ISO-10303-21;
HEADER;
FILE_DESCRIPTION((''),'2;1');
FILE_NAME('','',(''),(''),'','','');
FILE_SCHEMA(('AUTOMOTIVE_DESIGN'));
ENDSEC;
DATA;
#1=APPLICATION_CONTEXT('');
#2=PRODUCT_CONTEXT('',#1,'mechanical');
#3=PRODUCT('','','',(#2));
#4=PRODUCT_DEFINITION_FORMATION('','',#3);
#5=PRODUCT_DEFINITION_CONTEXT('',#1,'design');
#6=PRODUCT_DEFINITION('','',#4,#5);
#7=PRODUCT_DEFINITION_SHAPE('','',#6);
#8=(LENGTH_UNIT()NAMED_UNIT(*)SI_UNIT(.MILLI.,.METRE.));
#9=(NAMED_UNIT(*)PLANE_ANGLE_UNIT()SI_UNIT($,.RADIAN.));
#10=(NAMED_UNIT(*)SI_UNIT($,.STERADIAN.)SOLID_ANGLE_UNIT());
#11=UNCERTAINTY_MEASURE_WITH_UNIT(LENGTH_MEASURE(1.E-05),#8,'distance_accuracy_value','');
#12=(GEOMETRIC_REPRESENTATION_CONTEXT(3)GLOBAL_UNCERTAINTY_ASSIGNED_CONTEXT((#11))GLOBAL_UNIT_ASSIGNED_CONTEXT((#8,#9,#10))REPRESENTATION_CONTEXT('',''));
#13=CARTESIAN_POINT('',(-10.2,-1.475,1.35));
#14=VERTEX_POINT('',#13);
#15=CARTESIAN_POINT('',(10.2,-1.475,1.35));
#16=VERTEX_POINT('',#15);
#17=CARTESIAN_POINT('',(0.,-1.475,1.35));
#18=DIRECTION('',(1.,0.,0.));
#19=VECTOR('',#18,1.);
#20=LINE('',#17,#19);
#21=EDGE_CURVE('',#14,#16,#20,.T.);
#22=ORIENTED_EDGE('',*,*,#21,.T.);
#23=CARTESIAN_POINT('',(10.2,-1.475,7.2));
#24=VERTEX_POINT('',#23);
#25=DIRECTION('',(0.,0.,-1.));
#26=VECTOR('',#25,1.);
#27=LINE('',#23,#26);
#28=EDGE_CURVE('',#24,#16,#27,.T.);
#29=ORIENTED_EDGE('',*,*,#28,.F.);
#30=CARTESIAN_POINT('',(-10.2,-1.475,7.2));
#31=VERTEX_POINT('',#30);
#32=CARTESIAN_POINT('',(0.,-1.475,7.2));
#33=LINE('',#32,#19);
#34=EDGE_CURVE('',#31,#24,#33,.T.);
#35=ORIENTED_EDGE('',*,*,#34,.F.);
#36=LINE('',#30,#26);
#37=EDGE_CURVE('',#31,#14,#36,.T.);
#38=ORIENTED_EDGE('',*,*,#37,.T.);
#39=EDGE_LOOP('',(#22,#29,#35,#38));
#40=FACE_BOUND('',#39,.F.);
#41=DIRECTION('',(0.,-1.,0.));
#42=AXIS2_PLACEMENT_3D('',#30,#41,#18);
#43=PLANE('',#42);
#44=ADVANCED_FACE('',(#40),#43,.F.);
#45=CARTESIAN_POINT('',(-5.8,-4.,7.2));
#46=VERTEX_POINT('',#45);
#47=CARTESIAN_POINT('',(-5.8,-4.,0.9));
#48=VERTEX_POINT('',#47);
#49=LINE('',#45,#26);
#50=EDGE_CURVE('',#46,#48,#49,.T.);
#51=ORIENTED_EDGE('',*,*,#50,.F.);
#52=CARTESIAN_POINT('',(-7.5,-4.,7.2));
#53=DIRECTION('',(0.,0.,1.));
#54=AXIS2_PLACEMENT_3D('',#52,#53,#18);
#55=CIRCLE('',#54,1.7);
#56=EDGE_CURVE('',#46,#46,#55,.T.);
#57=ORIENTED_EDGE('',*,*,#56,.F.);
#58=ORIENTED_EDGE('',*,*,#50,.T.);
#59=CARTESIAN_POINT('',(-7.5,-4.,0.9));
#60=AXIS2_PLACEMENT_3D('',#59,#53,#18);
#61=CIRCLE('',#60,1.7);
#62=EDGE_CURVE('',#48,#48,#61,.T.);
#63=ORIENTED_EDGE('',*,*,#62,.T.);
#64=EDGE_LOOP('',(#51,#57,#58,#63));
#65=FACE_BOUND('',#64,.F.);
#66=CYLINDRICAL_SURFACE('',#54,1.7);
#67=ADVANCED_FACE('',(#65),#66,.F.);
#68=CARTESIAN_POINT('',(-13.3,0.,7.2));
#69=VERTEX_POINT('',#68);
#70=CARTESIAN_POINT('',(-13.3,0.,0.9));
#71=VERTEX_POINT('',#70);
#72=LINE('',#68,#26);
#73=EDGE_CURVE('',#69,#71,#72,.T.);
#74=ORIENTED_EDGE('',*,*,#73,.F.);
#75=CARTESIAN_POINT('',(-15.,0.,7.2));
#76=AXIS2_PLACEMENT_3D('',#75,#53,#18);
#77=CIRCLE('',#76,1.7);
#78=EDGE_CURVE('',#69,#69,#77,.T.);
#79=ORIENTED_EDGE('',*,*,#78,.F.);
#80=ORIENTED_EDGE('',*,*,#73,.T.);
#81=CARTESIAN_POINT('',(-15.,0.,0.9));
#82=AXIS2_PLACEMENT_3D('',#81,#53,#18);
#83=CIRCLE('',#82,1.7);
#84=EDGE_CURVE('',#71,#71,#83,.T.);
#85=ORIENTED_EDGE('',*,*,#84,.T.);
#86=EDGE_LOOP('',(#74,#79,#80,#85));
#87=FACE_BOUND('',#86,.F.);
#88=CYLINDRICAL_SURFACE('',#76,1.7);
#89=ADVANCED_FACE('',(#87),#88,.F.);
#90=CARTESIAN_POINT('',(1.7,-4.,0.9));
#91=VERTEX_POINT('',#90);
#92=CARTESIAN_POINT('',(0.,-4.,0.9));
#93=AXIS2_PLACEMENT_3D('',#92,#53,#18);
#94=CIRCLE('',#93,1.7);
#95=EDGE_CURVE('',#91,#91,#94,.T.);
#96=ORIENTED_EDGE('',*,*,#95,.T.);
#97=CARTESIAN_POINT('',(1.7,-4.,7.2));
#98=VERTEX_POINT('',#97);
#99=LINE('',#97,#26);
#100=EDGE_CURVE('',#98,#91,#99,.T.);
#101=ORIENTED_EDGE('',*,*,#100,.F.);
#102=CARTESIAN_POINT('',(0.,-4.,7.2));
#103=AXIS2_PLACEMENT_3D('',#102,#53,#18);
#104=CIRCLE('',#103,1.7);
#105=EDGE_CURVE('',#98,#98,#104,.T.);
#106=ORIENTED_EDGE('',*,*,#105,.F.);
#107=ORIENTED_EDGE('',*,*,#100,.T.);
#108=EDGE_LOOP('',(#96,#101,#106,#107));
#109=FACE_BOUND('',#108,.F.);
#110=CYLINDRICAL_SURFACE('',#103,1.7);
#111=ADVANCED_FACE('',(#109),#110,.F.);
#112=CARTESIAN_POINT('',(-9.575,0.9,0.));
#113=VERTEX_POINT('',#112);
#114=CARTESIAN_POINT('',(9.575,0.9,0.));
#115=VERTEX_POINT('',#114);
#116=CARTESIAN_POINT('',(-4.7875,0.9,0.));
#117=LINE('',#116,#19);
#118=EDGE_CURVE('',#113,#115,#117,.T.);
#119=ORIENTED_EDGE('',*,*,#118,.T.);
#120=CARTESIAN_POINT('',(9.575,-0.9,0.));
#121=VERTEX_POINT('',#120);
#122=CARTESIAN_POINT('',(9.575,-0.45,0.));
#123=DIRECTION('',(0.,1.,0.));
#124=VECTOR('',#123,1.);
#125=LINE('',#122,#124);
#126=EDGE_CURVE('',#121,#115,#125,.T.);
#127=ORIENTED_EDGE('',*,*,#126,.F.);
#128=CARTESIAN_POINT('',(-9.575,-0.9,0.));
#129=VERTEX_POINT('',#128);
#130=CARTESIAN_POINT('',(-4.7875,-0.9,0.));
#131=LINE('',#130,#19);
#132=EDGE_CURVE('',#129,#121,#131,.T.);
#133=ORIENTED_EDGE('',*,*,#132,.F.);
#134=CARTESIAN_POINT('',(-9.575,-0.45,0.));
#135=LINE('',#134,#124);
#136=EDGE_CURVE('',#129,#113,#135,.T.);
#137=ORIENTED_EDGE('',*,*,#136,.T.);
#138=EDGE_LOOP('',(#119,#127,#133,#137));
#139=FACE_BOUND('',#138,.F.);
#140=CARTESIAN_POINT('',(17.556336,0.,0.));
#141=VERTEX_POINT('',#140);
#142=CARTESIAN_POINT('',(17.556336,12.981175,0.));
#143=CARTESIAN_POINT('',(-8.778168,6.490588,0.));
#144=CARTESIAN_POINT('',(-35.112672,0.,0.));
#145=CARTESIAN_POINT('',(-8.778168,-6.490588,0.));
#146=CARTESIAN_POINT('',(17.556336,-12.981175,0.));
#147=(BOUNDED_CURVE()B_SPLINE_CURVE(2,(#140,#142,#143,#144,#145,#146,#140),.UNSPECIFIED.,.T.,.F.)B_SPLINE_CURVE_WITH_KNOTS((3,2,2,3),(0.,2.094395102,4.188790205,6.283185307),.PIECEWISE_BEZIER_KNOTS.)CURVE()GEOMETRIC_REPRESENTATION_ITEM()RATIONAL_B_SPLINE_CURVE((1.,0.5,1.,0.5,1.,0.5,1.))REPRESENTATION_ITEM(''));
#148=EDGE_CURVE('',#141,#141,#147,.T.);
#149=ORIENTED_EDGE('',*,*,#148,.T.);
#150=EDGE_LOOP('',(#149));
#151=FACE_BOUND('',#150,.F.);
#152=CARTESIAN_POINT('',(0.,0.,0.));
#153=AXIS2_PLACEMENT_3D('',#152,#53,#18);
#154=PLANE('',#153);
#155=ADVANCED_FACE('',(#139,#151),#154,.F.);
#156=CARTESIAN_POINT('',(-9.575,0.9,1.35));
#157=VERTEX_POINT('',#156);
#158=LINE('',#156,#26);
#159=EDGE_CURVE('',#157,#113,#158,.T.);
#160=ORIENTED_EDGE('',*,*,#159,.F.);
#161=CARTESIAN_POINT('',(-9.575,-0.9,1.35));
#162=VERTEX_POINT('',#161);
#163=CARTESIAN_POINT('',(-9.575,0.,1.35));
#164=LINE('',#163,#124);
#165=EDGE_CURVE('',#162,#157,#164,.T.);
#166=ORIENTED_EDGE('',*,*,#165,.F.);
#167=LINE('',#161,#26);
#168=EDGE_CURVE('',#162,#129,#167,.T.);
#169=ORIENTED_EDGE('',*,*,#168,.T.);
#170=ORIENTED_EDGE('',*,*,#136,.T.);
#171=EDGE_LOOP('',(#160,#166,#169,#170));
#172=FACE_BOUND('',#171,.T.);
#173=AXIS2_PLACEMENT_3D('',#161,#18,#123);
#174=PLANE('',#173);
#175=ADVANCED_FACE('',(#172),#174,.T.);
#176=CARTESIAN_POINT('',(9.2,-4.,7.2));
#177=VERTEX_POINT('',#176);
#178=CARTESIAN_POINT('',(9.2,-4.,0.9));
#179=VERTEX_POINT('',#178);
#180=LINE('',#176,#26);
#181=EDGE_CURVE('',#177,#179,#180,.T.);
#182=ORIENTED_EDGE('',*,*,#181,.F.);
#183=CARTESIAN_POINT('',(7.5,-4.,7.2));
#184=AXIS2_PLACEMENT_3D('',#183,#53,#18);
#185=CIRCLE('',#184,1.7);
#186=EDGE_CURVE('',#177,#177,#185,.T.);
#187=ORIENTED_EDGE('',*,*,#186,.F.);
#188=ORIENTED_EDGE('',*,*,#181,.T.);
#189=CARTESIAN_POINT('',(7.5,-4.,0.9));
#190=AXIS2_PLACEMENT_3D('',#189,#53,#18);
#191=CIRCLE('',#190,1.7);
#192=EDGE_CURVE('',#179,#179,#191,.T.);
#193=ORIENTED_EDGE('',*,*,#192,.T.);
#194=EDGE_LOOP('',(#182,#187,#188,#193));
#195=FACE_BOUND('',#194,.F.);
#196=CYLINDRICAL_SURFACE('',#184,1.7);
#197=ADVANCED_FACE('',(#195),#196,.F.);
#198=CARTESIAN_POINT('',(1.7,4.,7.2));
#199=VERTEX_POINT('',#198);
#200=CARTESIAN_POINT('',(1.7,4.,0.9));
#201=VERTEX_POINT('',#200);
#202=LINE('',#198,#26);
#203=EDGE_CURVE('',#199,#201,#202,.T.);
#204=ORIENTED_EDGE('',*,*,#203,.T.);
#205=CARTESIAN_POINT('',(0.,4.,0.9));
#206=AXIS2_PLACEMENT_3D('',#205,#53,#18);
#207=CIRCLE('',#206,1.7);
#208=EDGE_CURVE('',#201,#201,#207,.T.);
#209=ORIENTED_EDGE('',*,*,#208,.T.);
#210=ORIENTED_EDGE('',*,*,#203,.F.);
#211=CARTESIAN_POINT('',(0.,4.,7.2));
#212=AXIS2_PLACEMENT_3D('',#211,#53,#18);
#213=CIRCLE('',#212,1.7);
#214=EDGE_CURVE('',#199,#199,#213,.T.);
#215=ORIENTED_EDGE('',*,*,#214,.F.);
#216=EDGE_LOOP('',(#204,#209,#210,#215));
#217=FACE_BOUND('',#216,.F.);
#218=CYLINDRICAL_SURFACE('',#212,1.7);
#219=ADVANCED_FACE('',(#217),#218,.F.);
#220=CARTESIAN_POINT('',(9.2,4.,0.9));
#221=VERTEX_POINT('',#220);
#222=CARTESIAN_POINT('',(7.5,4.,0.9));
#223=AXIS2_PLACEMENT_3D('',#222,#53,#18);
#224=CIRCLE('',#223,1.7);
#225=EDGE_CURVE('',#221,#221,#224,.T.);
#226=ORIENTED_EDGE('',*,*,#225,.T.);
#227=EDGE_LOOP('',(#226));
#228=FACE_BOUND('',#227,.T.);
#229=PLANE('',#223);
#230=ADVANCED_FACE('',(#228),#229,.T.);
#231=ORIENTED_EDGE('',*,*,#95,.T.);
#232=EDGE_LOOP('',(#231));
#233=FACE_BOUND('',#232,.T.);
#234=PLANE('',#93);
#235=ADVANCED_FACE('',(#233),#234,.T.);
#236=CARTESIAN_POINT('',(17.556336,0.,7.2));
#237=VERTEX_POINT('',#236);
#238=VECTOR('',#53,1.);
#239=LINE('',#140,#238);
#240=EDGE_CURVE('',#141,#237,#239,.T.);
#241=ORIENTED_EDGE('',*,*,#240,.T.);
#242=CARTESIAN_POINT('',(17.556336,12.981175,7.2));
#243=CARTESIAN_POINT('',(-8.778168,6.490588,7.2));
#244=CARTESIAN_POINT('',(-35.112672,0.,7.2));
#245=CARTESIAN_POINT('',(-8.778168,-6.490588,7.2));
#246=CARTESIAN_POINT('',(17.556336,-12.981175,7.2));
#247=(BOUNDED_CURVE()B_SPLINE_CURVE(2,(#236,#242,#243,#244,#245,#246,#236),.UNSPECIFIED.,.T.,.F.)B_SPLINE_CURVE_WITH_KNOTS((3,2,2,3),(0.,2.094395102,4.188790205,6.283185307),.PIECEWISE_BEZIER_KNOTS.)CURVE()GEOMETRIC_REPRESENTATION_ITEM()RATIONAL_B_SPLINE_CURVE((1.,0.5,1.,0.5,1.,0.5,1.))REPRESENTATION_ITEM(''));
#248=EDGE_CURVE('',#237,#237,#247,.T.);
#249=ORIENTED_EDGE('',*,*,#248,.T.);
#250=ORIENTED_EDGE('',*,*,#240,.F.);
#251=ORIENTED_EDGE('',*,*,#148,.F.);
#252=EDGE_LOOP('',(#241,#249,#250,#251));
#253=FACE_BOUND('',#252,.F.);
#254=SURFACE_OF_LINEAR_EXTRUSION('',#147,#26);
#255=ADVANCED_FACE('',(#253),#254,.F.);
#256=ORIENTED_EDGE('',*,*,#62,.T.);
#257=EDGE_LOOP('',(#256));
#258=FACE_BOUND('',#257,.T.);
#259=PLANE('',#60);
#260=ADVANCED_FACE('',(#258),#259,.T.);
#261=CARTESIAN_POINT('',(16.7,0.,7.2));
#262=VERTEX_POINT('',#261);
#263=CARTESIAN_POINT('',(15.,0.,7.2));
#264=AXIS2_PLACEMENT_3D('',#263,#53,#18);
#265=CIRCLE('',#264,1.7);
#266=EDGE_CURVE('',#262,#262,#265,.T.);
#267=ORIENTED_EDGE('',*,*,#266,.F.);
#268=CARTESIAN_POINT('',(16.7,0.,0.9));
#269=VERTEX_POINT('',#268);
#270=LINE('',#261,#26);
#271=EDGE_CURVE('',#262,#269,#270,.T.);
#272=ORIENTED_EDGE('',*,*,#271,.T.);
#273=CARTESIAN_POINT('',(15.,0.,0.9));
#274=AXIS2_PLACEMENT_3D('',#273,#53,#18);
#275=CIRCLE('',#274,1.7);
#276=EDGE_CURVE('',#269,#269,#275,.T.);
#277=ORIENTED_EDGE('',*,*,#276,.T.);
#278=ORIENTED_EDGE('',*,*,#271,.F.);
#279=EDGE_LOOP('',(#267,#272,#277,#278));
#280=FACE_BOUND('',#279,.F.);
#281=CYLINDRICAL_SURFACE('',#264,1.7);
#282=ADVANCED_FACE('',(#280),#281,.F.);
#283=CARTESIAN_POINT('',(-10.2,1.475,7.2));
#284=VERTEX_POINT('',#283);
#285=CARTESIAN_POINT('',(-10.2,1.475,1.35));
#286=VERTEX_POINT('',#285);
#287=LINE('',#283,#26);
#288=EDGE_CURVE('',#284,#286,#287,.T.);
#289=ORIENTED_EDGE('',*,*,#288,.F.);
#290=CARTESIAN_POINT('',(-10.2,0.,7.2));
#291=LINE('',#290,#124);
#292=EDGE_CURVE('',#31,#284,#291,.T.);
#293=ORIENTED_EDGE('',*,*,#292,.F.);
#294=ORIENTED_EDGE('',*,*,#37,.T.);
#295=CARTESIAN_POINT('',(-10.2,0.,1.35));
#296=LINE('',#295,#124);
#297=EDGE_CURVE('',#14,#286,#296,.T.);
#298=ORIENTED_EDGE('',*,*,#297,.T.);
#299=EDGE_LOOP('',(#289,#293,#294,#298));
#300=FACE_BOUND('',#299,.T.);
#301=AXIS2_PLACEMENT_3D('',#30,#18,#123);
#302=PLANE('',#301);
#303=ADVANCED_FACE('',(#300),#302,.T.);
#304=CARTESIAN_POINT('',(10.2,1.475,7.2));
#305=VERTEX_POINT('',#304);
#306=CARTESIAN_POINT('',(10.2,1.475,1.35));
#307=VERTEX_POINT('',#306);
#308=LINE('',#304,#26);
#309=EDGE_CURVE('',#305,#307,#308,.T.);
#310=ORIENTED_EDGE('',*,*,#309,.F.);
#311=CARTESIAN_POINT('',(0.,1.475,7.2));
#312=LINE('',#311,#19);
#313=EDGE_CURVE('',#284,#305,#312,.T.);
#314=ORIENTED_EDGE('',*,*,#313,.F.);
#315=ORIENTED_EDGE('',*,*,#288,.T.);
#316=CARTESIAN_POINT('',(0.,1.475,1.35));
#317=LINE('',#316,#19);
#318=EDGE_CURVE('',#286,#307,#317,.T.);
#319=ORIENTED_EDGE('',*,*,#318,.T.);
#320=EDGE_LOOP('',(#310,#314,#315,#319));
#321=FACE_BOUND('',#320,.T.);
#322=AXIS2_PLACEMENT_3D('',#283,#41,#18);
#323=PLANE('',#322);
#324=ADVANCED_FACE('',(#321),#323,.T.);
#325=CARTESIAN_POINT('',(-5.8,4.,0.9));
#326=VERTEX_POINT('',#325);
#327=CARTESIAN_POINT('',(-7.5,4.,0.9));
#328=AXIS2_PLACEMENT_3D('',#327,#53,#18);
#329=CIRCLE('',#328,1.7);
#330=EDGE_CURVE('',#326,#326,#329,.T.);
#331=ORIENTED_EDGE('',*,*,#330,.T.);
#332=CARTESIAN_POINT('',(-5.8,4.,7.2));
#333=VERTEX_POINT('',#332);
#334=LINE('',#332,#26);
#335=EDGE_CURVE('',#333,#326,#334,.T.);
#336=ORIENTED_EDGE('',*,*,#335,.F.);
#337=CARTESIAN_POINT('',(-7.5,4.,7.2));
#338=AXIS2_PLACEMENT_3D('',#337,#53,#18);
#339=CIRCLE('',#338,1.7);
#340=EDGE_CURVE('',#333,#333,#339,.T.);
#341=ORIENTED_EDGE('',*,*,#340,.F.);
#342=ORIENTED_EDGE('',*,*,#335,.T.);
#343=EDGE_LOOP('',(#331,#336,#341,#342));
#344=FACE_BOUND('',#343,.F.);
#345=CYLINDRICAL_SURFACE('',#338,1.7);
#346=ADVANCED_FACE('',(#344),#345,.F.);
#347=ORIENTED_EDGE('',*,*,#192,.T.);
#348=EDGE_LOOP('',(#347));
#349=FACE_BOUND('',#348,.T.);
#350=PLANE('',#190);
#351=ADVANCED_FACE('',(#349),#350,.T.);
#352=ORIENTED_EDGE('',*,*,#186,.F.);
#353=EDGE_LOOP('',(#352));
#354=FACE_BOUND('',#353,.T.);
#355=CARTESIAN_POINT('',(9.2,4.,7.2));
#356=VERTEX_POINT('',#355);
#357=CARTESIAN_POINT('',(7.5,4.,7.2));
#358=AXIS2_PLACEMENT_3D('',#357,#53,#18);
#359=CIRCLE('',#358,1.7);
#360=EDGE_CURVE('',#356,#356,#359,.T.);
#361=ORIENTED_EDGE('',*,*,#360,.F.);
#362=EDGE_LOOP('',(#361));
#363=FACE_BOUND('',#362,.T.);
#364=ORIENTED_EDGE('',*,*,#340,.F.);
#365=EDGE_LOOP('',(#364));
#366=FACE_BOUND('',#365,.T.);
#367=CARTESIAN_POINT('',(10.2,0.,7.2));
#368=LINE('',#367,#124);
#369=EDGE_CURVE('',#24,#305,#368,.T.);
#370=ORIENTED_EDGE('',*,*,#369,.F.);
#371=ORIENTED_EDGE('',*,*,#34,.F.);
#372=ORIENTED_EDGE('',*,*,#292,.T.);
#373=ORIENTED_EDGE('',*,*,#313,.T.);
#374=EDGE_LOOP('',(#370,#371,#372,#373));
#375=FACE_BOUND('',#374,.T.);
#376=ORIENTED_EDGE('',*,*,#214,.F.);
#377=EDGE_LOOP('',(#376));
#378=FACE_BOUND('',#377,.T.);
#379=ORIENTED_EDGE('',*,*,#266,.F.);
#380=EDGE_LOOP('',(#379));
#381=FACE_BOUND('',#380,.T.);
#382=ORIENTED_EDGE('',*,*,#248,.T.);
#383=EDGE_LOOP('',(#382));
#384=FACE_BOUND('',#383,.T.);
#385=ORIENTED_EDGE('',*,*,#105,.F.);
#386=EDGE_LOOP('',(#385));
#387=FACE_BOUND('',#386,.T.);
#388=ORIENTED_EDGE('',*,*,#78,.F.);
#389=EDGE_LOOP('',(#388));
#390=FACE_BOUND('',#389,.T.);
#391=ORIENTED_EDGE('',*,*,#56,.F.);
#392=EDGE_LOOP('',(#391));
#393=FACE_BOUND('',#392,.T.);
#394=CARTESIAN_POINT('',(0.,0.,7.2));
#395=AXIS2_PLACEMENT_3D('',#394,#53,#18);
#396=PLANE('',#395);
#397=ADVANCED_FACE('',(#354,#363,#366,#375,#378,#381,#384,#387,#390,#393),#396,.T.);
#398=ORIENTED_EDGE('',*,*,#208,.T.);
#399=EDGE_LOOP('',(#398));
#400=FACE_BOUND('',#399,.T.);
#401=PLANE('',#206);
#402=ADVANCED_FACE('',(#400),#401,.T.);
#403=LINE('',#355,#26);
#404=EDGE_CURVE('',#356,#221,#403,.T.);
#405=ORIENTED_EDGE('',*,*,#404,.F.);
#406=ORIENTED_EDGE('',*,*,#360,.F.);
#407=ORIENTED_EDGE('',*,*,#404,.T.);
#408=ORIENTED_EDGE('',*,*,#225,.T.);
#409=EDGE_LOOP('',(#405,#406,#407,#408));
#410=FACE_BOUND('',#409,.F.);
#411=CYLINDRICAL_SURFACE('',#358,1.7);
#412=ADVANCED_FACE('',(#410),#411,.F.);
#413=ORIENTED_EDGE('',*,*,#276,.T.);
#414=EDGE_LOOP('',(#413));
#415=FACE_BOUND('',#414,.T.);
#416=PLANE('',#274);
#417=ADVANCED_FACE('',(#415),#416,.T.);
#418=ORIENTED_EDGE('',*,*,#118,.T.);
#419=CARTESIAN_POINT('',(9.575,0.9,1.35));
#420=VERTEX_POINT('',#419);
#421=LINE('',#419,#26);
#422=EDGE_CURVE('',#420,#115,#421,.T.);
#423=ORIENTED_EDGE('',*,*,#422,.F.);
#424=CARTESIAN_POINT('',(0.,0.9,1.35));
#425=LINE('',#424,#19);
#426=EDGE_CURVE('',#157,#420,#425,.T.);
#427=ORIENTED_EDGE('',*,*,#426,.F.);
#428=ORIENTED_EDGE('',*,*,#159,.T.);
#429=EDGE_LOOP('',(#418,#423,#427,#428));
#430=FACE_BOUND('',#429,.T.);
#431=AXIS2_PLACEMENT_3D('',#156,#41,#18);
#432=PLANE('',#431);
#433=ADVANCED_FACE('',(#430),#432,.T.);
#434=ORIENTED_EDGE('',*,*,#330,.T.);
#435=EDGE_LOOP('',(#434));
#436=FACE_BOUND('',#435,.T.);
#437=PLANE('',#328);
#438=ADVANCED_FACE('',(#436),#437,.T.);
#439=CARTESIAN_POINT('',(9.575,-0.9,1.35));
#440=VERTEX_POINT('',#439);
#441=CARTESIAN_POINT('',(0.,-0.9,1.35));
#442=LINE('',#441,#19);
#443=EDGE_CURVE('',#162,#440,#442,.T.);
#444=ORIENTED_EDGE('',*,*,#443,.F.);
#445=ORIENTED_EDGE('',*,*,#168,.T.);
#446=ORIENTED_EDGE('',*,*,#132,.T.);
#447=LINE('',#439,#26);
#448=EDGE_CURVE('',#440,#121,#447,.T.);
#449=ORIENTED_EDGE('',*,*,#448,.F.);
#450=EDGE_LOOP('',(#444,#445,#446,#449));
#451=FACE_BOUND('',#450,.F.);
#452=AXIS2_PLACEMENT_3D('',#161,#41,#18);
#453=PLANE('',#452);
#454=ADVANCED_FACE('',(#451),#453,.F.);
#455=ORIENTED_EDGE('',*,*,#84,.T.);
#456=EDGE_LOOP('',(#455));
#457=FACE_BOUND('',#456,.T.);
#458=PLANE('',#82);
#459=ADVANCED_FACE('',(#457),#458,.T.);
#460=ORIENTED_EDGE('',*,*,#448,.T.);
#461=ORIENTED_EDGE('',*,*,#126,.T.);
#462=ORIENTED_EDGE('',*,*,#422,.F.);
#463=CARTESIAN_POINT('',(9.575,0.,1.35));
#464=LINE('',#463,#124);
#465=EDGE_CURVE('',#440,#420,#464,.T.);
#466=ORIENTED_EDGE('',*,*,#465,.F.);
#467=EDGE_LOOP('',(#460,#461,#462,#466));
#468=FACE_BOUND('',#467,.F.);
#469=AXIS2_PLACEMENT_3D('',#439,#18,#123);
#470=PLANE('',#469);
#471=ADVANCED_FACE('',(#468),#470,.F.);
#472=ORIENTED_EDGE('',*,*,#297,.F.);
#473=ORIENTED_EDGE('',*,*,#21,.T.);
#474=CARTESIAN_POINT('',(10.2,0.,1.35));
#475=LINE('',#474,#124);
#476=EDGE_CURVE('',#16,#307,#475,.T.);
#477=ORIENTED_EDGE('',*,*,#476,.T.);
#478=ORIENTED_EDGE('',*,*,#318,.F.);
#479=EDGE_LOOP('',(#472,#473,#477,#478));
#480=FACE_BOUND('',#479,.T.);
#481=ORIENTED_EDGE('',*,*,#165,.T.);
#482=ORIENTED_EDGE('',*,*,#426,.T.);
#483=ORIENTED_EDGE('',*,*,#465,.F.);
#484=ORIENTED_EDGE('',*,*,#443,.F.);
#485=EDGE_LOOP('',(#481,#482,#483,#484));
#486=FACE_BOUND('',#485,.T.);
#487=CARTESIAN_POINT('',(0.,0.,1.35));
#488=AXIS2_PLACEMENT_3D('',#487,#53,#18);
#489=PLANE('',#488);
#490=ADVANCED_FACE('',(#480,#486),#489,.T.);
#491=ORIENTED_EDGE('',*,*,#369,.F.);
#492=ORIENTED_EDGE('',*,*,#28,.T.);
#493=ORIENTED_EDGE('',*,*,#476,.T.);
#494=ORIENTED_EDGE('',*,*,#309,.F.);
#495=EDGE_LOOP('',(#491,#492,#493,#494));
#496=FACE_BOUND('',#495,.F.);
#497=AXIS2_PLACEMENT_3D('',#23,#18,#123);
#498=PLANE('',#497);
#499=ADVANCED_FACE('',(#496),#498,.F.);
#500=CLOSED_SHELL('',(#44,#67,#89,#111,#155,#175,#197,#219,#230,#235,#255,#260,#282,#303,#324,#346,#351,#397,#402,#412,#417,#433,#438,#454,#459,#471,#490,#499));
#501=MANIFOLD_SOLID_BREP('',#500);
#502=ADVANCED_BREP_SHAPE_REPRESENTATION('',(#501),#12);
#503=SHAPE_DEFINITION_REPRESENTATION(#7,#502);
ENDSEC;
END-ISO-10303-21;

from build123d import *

# Parameters (mm, degrees)
F1_DEPTH = 7.2
F2_W     = 20.4
F2_H     = 2.95
F3_DEPTH = 5.85
F4_W     = 19.15
F4_H     = 1.8
F5_DEPTH = 1.3510001
F6_R     = 1.7
F7_DEPTH = 6.3


# Not quite as in the source:
# - a feature names something its author has since deleted; it is built from what else it names


with BuildPart() as f1:
    # F0 (on Top) → F1 (new body)
    with BuildSketch(Plane.XY):
        with BuildLine():
            add(Edge.make_bspline(
                [(17.5563361044, 0), (17.5563361044, 12.9811752067), (-8.7781680522, 6.4905876034), (-35.1126722087, 0), (-8.7781680522, -6.4905876034), (17.5563361044, -12.9811752067), (17.5563361044, 0)],
                knots=[0, 0, 0, 2.0943951024, 2.0943951024, 4.1887902048, 4.1887902048, 6.2831853072, 6.2831853072, 6.2831853072], degree=2, weights=[1, 0.5, 1, 0.5, 1, 0.5, 1]))
        make_face()
    extrude(amount=F1_DEPTH)

    # F2 (on face) → F3 (cut)
    with BuildSketch(Plane.XY.offset(7.2)):
        Rectangle(F2_W, F2_H)
    extrude(amount=-F3_DEPTH, mode=Mode.SUBTRACT)

    # F4 (on face) → F5 (cut, through all)
    with BuildSketch(Plane.XY.offset(1.35)):
        Rectangle(F4_W, F4_H)
    extrude(amount=-F5_DEPTH, mode=Mode.SUBTRACT)

    # F6 (on face) → F7 (cut)
    with BuildSketch(Plane.XY.offset(7.2)):
        with Locations((-15, 0)):
            Circle(F6_R)
        with Locations((0, 4)):
            Circle(F6_R)
        with Locations((0, -4)):
            Circle(F6_R)
        with Locations((15, 0)):
            Circle(F6_R)
        with Locations((-7.5, 4)):
            Circle(F6_R)
        with Locations((7.5, 4)):
            Circle(F6_R)
        with Locations((7.5, -4)):
            Circle(F6_R)
        with Locations((-7.5, -4)):
            Circle(F6_R)
    extrude(amount=-F7_DEPTH, mode=Mode.SUBTRACT)


solid = f1.part
